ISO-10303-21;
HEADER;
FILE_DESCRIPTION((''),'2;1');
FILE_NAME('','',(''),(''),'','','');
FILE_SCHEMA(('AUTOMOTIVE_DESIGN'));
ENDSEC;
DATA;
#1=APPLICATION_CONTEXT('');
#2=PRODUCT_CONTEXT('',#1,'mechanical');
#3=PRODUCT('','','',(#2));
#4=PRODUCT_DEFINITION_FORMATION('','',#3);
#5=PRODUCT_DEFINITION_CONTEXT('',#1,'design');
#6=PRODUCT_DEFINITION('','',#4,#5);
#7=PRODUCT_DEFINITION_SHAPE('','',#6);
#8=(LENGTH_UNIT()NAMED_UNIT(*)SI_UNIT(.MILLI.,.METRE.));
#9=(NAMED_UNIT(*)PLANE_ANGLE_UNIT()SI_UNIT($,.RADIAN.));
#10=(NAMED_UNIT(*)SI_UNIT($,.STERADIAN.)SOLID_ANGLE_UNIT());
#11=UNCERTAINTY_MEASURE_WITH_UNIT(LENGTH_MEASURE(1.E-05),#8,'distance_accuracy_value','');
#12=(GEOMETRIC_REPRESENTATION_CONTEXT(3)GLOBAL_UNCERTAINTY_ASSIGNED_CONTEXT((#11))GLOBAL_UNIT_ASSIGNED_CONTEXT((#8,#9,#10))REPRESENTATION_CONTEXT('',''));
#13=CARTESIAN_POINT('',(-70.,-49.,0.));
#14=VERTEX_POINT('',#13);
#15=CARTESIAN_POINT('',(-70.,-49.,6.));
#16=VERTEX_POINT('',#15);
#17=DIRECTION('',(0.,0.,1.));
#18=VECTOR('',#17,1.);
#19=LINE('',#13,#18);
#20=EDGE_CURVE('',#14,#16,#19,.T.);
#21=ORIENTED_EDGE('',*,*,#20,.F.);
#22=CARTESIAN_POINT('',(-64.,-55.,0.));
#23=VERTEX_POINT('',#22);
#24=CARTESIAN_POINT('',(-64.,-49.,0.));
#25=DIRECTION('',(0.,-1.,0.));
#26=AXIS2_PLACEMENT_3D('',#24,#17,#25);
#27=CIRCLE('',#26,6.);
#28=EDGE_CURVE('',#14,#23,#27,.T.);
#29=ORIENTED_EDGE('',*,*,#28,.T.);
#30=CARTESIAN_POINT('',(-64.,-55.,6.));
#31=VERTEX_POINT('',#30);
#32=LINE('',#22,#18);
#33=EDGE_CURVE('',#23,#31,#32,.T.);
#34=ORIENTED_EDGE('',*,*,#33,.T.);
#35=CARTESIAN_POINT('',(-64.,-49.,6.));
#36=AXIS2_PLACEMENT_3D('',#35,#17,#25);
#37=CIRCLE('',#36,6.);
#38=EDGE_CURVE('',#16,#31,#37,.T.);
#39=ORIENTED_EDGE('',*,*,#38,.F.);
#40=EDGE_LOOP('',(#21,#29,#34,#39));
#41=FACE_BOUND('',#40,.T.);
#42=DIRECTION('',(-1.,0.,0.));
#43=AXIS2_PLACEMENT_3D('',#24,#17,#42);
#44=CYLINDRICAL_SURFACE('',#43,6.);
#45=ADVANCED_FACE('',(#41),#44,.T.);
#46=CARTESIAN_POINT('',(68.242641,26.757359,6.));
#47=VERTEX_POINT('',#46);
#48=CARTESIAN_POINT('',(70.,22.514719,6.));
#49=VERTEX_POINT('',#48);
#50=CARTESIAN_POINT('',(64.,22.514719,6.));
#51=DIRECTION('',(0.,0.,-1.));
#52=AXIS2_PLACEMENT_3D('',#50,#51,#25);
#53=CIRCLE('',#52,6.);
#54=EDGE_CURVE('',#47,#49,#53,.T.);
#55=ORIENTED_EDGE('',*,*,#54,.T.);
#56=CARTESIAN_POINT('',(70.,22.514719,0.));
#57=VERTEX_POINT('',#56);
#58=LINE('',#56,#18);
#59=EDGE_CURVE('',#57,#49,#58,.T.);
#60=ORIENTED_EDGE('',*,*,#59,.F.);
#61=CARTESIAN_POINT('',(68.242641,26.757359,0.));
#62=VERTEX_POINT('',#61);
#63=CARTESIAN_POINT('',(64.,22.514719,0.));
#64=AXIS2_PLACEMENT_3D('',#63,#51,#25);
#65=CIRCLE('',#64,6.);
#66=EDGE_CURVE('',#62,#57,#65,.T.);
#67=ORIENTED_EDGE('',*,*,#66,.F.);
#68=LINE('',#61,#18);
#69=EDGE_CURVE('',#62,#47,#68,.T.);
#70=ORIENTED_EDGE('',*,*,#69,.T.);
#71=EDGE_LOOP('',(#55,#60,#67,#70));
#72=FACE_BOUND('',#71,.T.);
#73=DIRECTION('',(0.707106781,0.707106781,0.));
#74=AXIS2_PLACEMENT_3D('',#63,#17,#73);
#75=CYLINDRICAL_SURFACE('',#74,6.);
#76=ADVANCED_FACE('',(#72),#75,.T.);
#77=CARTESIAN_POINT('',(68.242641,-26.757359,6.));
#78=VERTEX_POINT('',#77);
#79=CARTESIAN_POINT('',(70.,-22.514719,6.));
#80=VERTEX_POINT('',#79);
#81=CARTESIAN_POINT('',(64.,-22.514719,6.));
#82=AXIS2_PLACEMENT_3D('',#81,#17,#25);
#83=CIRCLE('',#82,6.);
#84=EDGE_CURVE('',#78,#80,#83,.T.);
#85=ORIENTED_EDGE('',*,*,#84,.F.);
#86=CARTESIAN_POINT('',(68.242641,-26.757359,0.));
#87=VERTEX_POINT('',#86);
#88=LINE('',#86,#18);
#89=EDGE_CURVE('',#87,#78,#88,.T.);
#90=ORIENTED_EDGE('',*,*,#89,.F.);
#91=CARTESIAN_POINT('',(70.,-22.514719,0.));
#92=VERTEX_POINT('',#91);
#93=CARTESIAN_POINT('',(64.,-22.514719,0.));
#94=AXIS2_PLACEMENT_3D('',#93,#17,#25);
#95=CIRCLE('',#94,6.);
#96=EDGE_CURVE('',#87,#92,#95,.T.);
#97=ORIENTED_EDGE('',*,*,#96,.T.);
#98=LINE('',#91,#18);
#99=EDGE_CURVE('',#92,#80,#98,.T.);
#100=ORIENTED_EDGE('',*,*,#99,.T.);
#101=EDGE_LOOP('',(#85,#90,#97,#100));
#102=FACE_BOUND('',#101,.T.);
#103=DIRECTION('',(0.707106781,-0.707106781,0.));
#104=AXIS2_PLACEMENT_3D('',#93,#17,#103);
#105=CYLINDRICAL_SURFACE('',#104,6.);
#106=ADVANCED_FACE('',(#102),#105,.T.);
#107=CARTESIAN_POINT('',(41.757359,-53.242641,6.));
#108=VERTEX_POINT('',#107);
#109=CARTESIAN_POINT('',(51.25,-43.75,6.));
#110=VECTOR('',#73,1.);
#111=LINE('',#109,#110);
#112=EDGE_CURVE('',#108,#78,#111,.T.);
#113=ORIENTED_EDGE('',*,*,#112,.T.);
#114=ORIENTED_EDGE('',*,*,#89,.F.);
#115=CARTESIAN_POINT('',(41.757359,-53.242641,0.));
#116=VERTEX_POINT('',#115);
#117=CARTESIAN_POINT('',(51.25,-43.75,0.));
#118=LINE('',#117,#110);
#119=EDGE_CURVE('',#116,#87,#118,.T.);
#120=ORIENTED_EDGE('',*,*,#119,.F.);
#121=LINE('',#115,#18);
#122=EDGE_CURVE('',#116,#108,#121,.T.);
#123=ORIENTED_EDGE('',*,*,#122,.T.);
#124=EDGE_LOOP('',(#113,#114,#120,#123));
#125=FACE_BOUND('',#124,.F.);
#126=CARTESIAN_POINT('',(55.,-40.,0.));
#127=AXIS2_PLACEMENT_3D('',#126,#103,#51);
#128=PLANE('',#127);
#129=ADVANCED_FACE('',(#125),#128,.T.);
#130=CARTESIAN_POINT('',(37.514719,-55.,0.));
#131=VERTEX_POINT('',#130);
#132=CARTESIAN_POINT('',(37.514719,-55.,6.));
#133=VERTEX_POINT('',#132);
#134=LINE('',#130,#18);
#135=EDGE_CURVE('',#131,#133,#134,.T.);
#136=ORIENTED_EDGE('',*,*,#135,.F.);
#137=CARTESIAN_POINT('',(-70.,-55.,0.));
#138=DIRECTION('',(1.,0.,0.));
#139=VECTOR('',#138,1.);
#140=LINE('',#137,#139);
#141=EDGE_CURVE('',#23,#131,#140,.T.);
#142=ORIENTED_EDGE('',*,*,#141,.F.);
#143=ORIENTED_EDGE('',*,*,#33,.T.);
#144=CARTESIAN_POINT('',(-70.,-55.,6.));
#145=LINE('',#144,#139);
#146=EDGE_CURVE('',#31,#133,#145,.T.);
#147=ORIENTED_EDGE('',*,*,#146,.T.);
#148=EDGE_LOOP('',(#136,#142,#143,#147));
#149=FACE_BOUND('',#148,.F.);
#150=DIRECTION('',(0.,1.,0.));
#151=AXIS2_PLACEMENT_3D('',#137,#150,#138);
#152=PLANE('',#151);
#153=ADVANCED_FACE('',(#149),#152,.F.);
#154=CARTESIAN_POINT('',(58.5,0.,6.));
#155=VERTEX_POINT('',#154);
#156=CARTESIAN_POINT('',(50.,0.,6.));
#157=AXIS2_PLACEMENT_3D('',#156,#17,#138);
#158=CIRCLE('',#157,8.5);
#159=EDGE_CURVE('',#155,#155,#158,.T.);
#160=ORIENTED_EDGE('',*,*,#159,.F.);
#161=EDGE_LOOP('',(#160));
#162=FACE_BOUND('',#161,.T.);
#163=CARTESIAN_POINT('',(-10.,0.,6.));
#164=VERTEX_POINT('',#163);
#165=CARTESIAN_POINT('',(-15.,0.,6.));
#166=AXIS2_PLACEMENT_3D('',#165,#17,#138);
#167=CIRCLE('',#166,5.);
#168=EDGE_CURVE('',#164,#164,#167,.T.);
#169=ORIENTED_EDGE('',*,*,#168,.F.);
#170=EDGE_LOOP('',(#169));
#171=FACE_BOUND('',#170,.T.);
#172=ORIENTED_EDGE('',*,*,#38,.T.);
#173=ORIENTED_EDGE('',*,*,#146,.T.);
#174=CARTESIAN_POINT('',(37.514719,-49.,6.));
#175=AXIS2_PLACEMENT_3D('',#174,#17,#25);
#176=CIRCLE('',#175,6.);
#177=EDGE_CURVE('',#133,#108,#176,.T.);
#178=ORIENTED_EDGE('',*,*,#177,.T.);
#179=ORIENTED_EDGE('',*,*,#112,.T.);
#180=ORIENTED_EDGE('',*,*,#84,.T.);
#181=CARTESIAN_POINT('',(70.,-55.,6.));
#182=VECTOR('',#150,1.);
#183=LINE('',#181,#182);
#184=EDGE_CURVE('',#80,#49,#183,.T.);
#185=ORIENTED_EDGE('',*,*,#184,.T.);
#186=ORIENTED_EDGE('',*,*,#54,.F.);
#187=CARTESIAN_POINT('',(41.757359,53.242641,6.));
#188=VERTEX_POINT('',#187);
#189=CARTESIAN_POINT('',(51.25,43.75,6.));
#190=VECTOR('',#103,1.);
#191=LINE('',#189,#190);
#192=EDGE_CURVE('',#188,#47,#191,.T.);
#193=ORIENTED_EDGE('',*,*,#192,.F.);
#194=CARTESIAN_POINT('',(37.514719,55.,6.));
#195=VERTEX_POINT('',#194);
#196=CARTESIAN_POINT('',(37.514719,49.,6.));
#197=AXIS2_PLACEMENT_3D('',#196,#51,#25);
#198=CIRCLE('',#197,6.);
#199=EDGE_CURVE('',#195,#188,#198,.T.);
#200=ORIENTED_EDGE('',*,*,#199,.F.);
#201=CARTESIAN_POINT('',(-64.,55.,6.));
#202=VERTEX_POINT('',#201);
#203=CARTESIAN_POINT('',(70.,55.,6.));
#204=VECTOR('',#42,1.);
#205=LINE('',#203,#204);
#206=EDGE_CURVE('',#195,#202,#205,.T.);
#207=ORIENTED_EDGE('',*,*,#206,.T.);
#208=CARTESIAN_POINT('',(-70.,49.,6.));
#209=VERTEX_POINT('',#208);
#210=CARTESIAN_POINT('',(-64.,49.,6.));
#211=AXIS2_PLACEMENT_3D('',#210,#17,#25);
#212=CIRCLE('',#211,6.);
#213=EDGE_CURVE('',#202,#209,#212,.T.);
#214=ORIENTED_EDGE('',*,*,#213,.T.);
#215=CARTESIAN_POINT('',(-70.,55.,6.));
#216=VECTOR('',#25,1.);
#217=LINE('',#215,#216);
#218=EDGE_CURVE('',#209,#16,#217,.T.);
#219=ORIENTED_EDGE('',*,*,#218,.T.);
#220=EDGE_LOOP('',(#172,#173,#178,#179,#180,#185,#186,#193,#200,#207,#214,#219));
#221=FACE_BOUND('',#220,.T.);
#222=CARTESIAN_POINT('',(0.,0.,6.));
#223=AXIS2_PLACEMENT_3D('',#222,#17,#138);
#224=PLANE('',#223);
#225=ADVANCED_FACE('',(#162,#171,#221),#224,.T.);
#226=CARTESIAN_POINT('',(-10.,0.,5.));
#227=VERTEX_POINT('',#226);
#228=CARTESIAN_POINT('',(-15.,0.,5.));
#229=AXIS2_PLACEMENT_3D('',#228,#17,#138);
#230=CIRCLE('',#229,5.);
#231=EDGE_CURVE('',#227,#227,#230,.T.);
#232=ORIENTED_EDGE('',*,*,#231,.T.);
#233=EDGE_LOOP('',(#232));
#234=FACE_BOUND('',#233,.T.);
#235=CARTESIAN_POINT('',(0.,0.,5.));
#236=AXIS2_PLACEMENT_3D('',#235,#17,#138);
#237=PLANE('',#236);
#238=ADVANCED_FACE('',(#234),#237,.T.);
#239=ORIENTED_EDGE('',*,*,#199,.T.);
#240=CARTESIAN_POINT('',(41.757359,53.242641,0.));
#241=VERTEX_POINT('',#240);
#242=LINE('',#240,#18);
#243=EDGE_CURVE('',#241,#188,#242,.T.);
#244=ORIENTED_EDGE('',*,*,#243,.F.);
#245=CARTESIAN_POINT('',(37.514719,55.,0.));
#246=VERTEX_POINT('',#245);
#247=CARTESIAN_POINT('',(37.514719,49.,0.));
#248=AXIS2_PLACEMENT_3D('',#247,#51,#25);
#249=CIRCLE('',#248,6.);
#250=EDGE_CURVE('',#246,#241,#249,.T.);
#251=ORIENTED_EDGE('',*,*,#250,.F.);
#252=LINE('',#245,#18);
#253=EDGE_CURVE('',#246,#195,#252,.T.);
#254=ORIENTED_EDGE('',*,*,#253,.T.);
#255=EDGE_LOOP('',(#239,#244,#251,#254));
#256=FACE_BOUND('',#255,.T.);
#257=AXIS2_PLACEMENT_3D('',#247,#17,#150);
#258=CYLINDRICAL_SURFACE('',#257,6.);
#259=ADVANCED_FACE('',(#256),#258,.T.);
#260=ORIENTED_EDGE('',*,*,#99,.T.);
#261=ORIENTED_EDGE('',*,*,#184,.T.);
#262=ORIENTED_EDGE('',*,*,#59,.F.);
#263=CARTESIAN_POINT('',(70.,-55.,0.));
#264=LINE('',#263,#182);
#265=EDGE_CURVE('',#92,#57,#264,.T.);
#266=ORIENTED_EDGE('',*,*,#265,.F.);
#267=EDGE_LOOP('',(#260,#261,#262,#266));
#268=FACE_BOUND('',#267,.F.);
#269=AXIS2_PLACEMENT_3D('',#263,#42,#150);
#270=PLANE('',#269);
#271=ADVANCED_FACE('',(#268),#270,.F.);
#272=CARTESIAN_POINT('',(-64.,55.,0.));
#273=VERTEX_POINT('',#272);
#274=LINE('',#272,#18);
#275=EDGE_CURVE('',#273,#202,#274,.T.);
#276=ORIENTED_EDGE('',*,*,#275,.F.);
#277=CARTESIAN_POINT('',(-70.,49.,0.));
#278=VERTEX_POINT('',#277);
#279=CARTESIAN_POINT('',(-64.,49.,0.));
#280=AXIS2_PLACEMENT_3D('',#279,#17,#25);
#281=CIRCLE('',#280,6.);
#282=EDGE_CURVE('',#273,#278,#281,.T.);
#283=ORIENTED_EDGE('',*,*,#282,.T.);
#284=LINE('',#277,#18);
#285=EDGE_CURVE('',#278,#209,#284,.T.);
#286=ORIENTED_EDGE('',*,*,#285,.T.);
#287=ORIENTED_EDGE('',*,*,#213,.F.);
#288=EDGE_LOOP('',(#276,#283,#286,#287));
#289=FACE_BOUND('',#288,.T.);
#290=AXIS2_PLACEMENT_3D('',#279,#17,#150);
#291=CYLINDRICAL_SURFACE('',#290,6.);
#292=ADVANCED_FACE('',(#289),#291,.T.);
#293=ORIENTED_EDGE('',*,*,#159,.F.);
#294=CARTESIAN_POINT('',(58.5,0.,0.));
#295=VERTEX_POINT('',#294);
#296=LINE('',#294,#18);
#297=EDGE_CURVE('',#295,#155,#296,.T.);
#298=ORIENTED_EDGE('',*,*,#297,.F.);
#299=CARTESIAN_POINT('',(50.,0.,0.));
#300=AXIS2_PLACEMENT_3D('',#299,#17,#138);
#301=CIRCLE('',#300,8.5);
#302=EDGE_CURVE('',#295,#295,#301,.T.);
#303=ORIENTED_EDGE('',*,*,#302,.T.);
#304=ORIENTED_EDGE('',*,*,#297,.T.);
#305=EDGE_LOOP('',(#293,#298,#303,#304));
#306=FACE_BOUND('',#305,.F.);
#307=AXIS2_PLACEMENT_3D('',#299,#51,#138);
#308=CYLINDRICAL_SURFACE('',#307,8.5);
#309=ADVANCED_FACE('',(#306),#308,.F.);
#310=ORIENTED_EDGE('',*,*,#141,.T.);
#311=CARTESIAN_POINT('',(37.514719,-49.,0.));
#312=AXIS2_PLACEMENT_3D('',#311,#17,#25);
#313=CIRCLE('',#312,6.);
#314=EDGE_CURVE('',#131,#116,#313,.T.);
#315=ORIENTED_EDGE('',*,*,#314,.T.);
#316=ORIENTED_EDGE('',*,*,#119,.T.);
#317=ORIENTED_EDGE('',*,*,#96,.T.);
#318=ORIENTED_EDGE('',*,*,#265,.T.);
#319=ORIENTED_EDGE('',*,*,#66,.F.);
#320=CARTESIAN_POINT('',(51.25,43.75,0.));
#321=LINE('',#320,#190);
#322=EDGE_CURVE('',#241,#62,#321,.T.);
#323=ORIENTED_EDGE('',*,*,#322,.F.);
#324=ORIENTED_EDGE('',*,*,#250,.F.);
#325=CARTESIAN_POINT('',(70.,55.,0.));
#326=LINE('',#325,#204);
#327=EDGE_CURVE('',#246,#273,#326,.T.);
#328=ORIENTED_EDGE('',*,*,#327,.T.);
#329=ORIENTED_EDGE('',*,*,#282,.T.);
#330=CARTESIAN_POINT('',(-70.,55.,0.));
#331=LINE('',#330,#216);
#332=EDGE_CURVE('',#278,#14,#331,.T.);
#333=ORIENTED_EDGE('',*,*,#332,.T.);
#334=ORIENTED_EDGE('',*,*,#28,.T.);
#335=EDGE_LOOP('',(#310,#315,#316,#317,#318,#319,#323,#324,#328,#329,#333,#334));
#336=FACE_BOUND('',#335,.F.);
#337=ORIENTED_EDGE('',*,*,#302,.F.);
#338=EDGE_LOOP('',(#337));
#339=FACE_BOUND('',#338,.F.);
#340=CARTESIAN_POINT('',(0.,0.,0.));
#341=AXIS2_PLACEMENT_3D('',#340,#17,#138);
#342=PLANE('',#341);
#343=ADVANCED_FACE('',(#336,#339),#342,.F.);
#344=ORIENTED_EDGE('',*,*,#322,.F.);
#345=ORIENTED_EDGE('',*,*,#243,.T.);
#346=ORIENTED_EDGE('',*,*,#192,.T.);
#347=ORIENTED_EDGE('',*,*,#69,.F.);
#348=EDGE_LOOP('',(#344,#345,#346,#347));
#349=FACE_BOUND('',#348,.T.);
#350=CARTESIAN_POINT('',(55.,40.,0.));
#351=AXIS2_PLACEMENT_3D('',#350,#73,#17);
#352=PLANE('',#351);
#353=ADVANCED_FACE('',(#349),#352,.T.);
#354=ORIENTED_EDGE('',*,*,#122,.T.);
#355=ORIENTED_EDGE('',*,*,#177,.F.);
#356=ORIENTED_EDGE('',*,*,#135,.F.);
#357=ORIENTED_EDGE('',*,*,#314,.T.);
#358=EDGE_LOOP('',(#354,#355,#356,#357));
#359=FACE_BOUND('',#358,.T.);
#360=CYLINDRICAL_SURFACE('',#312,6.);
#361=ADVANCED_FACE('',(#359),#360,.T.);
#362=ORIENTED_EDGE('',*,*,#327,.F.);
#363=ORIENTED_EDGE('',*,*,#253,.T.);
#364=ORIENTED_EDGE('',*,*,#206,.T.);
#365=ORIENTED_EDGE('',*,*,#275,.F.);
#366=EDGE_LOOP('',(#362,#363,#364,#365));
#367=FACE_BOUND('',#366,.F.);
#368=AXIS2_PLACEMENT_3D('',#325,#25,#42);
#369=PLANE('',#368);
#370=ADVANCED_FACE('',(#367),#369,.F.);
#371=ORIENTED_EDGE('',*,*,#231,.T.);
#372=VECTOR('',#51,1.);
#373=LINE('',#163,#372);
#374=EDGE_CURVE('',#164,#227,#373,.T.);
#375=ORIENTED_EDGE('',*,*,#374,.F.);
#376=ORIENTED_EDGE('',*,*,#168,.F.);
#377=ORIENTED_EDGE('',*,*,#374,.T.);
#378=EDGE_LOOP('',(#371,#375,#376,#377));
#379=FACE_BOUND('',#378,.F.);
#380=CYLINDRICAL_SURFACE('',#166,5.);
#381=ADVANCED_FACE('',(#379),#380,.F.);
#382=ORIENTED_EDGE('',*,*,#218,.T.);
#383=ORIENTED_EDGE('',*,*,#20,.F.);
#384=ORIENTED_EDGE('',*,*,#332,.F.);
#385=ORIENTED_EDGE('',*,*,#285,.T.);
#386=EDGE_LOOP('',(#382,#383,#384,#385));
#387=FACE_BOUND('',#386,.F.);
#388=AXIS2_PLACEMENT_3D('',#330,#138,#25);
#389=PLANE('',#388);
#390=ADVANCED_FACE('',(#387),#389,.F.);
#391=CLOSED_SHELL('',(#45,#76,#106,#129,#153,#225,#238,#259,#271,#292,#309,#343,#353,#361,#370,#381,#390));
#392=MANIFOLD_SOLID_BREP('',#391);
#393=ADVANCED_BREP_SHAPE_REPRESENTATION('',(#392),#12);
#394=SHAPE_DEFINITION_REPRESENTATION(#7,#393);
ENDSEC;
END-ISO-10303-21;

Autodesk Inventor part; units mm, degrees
ref_plane "YZ Plane" through (0, 0, 0) normal (1, 0, 0) x (0, 1, 0)
ref_plane "XZ Plane" through (0, 0, 0) normal (0, 1, 0) x (-1, 0, 0)
ref_plane "XY Plane" through (0, 0, 0) normal (0, 0, 1) x (1, 0, 0)
sketch "Sketch1" plane through (0, 0, 0) normal (0, 0, 1) x (1, 0, 0)
  line L0 (-70, -55) -> (70, -55)
  line L1 (70, -55) -> (70, 55)
  line L2 (70, 55) -> (-70, 55)
  line L3 (-70, 55) -> (-70, -55)
  line L4 (-70, -55) -> (70, 55) construction
  line L5 (70, -55) -> (-70, 55) construction
  circle A0 centre (50, -35) radius 8.5
  circle A1 centre (50, 35) radius 8.5
  line L6 (0, 0) -> (70, 0) construction
  circle A2 centre (50, 0) radius 8.5
  dimension "d0" = 140
  dimension "d1" = 110
  dimension "d23" = 17
  dimension "d25" = 20
  dimension "d26" = 20
extrude "Plate1" add sketch "Sketch1" along normal blind 6 contours L3 L2 L1 L0 | A0 | A1
sketch "Sketch5" plane through (0, 0, 6) normal (0, 0, 1) x (1, 0, 0)
  line L0 (70, -55) -> (-70, -55) projected
  line L1 (-70, -55) -> (-70, 55) projected
  line L2 (-70, 55) -> (70, 55) projected
  circle A0 centre (-15, 0) radius 55
  circle A1 centre (-15, 0) radius 5
  point P0 (0, 0)
  point P1 (50, -55)
  point P2 (-50, -55)
  point P3 (-70, -35)
  point P4 (-70, 35)
  point P5 (-50, 55)
  point P6 (50, 55)
  dimension "d27" = 10
extrude "Extrusion2" cut sketch "Sketch5" against normal blind 1 contours A1
chamfer "Corner Chamfer2" distance 30 angle 45 2 edges at (70, -55, 3) (70, 55, 3)
fillet "Corner Round2" radius 6 6 edges at (40, -55, 3) (70, -25, 3) (70, 25, 3) (40, 55, 3) (-70, 55, 3) (-70, -55, 3)
equation "\"d26\" = d25"
equation "\"d2\" = Thickness"
equation "\"BendReliefWidth\" = Thickness"
equation "\"BendReliefDepth\" = 0.5 * Thickness"
equation "\"CornerReliefSize\" = 4 * Thickness"
equation "\"MinimumRemnant\" = 2 * Thickness"
equation "\"TransitionRadius\" = BendRadius"
equation "\"JacobiRadiusSize\" = BendRadius"
equation "\"GapSize\" = Thickness"
equation "\"Thickness\" = 6"
equation "\"BendRadius\" = 5"
properties part number "PNS-683 leg floor plate" material "Stainless Steel"
